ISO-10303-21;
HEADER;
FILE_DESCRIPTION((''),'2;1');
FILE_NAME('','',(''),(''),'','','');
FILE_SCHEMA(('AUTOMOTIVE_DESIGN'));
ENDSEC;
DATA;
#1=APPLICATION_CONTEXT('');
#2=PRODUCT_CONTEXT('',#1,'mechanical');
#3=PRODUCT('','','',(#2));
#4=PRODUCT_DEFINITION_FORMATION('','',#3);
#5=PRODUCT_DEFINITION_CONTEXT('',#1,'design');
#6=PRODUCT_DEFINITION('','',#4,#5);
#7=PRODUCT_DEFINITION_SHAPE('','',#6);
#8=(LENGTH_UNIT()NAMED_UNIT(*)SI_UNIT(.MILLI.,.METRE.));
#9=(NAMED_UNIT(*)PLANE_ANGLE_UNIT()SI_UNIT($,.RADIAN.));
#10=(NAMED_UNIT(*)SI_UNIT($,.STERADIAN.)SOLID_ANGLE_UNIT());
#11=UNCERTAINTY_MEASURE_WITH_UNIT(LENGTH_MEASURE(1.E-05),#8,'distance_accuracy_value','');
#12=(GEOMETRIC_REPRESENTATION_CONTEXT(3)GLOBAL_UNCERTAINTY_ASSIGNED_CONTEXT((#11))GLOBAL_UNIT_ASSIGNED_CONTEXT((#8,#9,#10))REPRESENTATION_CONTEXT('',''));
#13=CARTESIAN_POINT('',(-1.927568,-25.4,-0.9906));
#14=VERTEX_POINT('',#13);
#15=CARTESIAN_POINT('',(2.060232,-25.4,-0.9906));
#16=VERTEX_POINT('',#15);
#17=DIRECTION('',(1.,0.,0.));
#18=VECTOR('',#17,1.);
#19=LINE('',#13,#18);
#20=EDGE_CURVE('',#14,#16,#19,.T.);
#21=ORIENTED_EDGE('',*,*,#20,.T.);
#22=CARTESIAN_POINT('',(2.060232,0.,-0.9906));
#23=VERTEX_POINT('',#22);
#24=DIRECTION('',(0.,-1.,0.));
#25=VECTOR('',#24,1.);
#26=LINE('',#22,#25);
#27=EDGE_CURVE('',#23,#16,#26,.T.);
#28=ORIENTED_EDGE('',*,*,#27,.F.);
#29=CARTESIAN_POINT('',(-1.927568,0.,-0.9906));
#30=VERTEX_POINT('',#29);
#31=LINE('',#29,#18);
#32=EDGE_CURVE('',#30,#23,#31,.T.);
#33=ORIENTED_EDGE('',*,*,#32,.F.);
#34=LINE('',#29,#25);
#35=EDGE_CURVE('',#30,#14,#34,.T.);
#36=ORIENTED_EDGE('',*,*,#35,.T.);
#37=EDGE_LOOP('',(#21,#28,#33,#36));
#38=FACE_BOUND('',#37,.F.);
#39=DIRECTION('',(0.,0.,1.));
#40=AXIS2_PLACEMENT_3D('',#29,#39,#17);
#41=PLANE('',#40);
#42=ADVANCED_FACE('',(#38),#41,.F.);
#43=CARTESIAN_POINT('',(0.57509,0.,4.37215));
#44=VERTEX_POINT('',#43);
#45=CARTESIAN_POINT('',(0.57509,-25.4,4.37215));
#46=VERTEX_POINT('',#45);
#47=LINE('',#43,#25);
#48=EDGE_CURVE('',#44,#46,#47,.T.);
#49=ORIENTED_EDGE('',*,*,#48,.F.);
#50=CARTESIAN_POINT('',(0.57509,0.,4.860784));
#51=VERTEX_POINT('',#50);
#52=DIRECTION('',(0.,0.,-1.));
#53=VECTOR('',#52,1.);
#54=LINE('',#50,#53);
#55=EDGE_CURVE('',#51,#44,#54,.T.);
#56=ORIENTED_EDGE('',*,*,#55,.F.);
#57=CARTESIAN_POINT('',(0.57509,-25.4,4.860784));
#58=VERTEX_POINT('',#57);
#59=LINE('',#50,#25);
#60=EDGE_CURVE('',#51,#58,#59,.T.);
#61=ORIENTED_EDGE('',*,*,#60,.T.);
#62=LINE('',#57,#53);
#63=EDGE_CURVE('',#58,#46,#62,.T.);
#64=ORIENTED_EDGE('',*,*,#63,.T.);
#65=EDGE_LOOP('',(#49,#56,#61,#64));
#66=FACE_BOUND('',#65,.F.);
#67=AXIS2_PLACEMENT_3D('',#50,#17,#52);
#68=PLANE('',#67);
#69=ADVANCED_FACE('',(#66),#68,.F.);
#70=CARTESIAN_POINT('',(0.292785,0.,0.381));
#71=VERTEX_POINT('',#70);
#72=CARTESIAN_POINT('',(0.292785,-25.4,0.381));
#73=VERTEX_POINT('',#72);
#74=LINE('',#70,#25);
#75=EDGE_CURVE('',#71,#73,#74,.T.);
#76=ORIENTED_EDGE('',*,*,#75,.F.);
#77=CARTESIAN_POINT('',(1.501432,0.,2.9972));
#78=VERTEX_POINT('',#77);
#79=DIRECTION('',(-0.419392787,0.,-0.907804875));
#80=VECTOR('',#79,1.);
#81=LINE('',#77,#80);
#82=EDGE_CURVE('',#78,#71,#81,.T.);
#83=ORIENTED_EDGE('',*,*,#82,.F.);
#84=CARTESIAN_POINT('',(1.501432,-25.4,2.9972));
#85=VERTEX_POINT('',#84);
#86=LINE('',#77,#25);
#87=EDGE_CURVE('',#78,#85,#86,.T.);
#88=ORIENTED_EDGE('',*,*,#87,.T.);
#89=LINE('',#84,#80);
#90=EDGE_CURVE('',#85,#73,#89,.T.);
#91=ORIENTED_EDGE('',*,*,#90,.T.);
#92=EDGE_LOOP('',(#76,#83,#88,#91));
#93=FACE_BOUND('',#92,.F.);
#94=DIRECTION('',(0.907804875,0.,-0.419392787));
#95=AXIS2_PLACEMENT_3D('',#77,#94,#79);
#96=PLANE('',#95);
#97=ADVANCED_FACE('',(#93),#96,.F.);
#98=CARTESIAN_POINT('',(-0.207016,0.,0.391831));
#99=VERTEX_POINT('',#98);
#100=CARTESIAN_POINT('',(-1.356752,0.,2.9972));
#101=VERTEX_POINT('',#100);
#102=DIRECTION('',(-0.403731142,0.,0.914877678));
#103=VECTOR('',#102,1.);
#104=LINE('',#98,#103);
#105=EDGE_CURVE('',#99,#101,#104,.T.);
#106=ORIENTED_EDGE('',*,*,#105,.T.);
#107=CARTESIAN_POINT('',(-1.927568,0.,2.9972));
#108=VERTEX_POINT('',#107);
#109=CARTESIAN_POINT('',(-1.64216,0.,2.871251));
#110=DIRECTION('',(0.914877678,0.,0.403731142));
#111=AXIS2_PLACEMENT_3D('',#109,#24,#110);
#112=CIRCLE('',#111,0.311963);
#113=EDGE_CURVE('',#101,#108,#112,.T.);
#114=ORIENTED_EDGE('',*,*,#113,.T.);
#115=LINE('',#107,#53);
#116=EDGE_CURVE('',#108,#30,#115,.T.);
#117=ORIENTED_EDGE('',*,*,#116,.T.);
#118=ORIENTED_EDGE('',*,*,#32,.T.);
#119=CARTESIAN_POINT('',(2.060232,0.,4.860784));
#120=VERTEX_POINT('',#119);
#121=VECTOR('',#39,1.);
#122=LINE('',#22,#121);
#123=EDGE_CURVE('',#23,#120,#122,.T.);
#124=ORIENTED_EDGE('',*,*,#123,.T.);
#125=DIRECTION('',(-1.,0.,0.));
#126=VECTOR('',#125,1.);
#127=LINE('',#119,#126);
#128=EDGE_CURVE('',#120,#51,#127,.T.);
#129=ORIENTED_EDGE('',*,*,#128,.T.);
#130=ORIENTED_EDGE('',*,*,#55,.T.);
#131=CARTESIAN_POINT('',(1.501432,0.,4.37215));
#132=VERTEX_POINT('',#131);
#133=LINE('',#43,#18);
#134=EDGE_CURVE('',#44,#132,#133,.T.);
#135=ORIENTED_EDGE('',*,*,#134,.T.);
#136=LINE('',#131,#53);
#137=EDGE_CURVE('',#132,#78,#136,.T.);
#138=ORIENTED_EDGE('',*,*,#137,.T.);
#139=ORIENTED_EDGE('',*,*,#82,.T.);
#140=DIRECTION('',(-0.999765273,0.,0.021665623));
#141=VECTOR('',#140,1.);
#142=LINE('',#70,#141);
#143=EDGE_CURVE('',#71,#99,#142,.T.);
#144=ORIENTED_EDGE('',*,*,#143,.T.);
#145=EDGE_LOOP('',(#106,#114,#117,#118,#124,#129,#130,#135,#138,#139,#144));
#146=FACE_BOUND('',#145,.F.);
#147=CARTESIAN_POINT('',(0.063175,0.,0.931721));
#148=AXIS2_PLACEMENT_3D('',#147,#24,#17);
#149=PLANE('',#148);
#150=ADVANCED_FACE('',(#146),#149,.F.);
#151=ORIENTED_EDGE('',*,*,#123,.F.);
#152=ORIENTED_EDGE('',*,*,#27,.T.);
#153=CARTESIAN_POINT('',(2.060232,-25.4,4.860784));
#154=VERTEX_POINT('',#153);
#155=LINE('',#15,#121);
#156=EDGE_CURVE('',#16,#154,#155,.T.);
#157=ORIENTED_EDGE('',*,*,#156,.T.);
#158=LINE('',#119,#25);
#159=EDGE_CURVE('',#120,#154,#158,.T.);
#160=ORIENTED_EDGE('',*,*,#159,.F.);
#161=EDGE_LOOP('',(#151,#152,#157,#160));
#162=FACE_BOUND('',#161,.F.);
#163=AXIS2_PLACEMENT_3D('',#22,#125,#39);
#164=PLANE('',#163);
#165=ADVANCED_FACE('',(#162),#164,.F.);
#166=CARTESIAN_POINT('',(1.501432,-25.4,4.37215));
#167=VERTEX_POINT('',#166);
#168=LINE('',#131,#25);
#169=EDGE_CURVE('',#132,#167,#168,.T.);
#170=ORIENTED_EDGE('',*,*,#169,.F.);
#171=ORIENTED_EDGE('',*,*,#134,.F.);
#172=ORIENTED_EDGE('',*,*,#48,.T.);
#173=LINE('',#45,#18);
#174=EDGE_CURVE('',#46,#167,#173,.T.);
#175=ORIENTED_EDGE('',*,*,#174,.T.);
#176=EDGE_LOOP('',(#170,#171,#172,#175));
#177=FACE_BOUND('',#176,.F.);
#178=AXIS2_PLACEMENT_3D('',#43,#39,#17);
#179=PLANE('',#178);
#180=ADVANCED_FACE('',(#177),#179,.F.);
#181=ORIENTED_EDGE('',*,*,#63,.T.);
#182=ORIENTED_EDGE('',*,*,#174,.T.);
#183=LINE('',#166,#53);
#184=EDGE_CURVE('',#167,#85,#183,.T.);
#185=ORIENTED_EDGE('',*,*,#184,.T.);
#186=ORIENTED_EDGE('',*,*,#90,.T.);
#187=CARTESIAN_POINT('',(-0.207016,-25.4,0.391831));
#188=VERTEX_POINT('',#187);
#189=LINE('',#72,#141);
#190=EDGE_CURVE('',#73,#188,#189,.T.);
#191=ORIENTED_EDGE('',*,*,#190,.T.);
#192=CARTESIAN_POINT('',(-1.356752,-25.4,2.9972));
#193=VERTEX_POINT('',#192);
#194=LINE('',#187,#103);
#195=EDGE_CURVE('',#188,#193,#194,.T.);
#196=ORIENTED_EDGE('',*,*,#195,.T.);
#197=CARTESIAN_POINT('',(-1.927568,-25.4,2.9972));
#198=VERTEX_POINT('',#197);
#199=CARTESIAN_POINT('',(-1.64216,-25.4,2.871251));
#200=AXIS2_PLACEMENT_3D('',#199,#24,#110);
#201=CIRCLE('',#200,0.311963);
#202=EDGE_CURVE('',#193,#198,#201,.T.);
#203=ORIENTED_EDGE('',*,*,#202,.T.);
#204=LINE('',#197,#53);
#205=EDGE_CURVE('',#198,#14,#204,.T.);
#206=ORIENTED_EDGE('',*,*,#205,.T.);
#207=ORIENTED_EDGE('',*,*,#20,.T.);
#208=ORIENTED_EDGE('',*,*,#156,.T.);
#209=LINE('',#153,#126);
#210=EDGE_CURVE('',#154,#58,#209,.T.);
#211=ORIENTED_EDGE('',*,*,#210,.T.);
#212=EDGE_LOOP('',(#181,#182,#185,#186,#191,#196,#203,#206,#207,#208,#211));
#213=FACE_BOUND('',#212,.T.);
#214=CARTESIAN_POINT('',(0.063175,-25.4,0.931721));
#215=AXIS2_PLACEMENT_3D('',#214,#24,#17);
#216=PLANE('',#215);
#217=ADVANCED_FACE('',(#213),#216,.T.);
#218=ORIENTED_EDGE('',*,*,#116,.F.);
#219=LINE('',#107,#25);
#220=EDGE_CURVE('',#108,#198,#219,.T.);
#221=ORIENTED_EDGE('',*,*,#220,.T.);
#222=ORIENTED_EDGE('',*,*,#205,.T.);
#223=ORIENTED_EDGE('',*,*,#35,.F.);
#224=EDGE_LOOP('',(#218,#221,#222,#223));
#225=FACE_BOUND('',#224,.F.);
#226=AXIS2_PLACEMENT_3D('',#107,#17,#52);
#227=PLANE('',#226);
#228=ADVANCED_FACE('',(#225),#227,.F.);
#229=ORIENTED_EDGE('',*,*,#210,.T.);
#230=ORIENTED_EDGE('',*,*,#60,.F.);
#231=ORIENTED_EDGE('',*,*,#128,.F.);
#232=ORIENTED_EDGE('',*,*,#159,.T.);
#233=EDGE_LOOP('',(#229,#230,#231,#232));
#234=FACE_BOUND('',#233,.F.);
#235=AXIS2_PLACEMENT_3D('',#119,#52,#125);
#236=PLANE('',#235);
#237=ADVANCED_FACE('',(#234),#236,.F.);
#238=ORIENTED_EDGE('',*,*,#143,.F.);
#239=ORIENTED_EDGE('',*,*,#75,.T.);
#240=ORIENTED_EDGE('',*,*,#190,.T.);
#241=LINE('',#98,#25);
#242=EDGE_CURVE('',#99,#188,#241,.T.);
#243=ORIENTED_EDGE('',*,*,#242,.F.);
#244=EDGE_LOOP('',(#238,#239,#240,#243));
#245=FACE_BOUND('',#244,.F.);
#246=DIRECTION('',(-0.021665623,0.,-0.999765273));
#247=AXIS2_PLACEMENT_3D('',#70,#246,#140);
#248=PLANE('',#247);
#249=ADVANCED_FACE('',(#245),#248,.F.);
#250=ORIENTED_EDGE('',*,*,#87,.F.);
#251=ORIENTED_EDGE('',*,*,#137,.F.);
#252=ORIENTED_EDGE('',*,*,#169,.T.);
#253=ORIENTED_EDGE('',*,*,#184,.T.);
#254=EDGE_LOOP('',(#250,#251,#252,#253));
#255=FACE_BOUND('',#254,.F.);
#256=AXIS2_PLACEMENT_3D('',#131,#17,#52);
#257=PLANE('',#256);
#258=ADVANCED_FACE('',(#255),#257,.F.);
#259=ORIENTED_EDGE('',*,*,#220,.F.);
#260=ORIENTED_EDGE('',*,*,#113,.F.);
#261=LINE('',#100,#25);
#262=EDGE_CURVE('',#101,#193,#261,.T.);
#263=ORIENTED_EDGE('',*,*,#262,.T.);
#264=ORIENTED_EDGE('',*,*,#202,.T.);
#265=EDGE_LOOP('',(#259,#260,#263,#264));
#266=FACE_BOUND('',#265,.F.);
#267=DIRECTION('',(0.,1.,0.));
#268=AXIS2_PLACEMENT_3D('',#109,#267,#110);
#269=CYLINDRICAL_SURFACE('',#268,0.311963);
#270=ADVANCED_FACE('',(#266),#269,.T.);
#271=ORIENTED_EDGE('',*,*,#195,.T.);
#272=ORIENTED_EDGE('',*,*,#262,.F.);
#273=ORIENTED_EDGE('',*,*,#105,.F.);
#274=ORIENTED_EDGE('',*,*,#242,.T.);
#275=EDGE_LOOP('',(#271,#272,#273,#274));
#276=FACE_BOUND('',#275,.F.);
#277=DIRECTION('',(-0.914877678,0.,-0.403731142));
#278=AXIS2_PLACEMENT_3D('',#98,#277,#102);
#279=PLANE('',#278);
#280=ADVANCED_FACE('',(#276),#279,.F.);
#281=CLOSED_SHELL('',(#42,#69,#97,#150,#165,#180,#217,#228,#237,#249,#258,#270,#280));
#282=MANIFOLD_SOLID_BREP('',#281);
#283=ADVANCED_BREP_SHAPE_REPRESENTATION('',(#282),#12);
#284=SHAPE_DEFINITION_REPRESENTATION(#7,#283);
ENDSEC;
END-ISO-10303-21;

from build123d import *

# Parameters (mm, degrees)
F1_DEPTH = 25.4


# Not quite as in the source:
# - a feature names something its author has since deleted; it is built from what else it names


with BuildPart() as f1:
    # F0 (on Front) → F1 (new body)
    with BuildSketch(Plane.XZ):
        with BuildLine():
            Line((-1.9275679621, -0.9906), (2.0602320379, -0.9906))
            Line((2.0602320379, -0.9906), (2.0602320379, 2.9972))
            ThreePointArc((2.0602320379, 2.9972), (1.7808320379, 3.1758966119), (1.5014320379, 2.9972))
            Line((1.5014320379, 2.9972), (0.2927852911, 0.381))
            Line((0.2927852911, 0.381), (-0.2070155831, 0.3918310395))
            Line((-0.2070155831, 0.3918310395), (-1.3567524399, 2.9972))
            ThreePointArc((-1.3567524399, 2.9972), (-1.642160201, 3.1832136759), (-1.9275679621, 2.9972))
            Line((-1.9275679621, 2.9972), (-1.9275679621, -0.9906))
        make_face()
        with BuildLine():
            ThreePointArc((1.5014320379, 2.9972), (1.7808320379, 3.1758966119), (2.0602320379, 2.9972))
            Line((2.0602320379, 2.9972), (2.0602320379, 4.8607838479))
            Line((2.0602320379, 4.8607838479), (0.575090351, 4.8607838479))
            Line((0.575090351, 4.8607838479), (0.575090351, 4.3721500923))
            Line((0.575090351, 4.3721500923), (1.5014320379, 4.3721500923))
            Line((1.5014320379, 4.3721500923), (1.5014320379, 2.9972))
        make_face()
    extrude(amount=F1_DEPTH)


solid = f1.part
